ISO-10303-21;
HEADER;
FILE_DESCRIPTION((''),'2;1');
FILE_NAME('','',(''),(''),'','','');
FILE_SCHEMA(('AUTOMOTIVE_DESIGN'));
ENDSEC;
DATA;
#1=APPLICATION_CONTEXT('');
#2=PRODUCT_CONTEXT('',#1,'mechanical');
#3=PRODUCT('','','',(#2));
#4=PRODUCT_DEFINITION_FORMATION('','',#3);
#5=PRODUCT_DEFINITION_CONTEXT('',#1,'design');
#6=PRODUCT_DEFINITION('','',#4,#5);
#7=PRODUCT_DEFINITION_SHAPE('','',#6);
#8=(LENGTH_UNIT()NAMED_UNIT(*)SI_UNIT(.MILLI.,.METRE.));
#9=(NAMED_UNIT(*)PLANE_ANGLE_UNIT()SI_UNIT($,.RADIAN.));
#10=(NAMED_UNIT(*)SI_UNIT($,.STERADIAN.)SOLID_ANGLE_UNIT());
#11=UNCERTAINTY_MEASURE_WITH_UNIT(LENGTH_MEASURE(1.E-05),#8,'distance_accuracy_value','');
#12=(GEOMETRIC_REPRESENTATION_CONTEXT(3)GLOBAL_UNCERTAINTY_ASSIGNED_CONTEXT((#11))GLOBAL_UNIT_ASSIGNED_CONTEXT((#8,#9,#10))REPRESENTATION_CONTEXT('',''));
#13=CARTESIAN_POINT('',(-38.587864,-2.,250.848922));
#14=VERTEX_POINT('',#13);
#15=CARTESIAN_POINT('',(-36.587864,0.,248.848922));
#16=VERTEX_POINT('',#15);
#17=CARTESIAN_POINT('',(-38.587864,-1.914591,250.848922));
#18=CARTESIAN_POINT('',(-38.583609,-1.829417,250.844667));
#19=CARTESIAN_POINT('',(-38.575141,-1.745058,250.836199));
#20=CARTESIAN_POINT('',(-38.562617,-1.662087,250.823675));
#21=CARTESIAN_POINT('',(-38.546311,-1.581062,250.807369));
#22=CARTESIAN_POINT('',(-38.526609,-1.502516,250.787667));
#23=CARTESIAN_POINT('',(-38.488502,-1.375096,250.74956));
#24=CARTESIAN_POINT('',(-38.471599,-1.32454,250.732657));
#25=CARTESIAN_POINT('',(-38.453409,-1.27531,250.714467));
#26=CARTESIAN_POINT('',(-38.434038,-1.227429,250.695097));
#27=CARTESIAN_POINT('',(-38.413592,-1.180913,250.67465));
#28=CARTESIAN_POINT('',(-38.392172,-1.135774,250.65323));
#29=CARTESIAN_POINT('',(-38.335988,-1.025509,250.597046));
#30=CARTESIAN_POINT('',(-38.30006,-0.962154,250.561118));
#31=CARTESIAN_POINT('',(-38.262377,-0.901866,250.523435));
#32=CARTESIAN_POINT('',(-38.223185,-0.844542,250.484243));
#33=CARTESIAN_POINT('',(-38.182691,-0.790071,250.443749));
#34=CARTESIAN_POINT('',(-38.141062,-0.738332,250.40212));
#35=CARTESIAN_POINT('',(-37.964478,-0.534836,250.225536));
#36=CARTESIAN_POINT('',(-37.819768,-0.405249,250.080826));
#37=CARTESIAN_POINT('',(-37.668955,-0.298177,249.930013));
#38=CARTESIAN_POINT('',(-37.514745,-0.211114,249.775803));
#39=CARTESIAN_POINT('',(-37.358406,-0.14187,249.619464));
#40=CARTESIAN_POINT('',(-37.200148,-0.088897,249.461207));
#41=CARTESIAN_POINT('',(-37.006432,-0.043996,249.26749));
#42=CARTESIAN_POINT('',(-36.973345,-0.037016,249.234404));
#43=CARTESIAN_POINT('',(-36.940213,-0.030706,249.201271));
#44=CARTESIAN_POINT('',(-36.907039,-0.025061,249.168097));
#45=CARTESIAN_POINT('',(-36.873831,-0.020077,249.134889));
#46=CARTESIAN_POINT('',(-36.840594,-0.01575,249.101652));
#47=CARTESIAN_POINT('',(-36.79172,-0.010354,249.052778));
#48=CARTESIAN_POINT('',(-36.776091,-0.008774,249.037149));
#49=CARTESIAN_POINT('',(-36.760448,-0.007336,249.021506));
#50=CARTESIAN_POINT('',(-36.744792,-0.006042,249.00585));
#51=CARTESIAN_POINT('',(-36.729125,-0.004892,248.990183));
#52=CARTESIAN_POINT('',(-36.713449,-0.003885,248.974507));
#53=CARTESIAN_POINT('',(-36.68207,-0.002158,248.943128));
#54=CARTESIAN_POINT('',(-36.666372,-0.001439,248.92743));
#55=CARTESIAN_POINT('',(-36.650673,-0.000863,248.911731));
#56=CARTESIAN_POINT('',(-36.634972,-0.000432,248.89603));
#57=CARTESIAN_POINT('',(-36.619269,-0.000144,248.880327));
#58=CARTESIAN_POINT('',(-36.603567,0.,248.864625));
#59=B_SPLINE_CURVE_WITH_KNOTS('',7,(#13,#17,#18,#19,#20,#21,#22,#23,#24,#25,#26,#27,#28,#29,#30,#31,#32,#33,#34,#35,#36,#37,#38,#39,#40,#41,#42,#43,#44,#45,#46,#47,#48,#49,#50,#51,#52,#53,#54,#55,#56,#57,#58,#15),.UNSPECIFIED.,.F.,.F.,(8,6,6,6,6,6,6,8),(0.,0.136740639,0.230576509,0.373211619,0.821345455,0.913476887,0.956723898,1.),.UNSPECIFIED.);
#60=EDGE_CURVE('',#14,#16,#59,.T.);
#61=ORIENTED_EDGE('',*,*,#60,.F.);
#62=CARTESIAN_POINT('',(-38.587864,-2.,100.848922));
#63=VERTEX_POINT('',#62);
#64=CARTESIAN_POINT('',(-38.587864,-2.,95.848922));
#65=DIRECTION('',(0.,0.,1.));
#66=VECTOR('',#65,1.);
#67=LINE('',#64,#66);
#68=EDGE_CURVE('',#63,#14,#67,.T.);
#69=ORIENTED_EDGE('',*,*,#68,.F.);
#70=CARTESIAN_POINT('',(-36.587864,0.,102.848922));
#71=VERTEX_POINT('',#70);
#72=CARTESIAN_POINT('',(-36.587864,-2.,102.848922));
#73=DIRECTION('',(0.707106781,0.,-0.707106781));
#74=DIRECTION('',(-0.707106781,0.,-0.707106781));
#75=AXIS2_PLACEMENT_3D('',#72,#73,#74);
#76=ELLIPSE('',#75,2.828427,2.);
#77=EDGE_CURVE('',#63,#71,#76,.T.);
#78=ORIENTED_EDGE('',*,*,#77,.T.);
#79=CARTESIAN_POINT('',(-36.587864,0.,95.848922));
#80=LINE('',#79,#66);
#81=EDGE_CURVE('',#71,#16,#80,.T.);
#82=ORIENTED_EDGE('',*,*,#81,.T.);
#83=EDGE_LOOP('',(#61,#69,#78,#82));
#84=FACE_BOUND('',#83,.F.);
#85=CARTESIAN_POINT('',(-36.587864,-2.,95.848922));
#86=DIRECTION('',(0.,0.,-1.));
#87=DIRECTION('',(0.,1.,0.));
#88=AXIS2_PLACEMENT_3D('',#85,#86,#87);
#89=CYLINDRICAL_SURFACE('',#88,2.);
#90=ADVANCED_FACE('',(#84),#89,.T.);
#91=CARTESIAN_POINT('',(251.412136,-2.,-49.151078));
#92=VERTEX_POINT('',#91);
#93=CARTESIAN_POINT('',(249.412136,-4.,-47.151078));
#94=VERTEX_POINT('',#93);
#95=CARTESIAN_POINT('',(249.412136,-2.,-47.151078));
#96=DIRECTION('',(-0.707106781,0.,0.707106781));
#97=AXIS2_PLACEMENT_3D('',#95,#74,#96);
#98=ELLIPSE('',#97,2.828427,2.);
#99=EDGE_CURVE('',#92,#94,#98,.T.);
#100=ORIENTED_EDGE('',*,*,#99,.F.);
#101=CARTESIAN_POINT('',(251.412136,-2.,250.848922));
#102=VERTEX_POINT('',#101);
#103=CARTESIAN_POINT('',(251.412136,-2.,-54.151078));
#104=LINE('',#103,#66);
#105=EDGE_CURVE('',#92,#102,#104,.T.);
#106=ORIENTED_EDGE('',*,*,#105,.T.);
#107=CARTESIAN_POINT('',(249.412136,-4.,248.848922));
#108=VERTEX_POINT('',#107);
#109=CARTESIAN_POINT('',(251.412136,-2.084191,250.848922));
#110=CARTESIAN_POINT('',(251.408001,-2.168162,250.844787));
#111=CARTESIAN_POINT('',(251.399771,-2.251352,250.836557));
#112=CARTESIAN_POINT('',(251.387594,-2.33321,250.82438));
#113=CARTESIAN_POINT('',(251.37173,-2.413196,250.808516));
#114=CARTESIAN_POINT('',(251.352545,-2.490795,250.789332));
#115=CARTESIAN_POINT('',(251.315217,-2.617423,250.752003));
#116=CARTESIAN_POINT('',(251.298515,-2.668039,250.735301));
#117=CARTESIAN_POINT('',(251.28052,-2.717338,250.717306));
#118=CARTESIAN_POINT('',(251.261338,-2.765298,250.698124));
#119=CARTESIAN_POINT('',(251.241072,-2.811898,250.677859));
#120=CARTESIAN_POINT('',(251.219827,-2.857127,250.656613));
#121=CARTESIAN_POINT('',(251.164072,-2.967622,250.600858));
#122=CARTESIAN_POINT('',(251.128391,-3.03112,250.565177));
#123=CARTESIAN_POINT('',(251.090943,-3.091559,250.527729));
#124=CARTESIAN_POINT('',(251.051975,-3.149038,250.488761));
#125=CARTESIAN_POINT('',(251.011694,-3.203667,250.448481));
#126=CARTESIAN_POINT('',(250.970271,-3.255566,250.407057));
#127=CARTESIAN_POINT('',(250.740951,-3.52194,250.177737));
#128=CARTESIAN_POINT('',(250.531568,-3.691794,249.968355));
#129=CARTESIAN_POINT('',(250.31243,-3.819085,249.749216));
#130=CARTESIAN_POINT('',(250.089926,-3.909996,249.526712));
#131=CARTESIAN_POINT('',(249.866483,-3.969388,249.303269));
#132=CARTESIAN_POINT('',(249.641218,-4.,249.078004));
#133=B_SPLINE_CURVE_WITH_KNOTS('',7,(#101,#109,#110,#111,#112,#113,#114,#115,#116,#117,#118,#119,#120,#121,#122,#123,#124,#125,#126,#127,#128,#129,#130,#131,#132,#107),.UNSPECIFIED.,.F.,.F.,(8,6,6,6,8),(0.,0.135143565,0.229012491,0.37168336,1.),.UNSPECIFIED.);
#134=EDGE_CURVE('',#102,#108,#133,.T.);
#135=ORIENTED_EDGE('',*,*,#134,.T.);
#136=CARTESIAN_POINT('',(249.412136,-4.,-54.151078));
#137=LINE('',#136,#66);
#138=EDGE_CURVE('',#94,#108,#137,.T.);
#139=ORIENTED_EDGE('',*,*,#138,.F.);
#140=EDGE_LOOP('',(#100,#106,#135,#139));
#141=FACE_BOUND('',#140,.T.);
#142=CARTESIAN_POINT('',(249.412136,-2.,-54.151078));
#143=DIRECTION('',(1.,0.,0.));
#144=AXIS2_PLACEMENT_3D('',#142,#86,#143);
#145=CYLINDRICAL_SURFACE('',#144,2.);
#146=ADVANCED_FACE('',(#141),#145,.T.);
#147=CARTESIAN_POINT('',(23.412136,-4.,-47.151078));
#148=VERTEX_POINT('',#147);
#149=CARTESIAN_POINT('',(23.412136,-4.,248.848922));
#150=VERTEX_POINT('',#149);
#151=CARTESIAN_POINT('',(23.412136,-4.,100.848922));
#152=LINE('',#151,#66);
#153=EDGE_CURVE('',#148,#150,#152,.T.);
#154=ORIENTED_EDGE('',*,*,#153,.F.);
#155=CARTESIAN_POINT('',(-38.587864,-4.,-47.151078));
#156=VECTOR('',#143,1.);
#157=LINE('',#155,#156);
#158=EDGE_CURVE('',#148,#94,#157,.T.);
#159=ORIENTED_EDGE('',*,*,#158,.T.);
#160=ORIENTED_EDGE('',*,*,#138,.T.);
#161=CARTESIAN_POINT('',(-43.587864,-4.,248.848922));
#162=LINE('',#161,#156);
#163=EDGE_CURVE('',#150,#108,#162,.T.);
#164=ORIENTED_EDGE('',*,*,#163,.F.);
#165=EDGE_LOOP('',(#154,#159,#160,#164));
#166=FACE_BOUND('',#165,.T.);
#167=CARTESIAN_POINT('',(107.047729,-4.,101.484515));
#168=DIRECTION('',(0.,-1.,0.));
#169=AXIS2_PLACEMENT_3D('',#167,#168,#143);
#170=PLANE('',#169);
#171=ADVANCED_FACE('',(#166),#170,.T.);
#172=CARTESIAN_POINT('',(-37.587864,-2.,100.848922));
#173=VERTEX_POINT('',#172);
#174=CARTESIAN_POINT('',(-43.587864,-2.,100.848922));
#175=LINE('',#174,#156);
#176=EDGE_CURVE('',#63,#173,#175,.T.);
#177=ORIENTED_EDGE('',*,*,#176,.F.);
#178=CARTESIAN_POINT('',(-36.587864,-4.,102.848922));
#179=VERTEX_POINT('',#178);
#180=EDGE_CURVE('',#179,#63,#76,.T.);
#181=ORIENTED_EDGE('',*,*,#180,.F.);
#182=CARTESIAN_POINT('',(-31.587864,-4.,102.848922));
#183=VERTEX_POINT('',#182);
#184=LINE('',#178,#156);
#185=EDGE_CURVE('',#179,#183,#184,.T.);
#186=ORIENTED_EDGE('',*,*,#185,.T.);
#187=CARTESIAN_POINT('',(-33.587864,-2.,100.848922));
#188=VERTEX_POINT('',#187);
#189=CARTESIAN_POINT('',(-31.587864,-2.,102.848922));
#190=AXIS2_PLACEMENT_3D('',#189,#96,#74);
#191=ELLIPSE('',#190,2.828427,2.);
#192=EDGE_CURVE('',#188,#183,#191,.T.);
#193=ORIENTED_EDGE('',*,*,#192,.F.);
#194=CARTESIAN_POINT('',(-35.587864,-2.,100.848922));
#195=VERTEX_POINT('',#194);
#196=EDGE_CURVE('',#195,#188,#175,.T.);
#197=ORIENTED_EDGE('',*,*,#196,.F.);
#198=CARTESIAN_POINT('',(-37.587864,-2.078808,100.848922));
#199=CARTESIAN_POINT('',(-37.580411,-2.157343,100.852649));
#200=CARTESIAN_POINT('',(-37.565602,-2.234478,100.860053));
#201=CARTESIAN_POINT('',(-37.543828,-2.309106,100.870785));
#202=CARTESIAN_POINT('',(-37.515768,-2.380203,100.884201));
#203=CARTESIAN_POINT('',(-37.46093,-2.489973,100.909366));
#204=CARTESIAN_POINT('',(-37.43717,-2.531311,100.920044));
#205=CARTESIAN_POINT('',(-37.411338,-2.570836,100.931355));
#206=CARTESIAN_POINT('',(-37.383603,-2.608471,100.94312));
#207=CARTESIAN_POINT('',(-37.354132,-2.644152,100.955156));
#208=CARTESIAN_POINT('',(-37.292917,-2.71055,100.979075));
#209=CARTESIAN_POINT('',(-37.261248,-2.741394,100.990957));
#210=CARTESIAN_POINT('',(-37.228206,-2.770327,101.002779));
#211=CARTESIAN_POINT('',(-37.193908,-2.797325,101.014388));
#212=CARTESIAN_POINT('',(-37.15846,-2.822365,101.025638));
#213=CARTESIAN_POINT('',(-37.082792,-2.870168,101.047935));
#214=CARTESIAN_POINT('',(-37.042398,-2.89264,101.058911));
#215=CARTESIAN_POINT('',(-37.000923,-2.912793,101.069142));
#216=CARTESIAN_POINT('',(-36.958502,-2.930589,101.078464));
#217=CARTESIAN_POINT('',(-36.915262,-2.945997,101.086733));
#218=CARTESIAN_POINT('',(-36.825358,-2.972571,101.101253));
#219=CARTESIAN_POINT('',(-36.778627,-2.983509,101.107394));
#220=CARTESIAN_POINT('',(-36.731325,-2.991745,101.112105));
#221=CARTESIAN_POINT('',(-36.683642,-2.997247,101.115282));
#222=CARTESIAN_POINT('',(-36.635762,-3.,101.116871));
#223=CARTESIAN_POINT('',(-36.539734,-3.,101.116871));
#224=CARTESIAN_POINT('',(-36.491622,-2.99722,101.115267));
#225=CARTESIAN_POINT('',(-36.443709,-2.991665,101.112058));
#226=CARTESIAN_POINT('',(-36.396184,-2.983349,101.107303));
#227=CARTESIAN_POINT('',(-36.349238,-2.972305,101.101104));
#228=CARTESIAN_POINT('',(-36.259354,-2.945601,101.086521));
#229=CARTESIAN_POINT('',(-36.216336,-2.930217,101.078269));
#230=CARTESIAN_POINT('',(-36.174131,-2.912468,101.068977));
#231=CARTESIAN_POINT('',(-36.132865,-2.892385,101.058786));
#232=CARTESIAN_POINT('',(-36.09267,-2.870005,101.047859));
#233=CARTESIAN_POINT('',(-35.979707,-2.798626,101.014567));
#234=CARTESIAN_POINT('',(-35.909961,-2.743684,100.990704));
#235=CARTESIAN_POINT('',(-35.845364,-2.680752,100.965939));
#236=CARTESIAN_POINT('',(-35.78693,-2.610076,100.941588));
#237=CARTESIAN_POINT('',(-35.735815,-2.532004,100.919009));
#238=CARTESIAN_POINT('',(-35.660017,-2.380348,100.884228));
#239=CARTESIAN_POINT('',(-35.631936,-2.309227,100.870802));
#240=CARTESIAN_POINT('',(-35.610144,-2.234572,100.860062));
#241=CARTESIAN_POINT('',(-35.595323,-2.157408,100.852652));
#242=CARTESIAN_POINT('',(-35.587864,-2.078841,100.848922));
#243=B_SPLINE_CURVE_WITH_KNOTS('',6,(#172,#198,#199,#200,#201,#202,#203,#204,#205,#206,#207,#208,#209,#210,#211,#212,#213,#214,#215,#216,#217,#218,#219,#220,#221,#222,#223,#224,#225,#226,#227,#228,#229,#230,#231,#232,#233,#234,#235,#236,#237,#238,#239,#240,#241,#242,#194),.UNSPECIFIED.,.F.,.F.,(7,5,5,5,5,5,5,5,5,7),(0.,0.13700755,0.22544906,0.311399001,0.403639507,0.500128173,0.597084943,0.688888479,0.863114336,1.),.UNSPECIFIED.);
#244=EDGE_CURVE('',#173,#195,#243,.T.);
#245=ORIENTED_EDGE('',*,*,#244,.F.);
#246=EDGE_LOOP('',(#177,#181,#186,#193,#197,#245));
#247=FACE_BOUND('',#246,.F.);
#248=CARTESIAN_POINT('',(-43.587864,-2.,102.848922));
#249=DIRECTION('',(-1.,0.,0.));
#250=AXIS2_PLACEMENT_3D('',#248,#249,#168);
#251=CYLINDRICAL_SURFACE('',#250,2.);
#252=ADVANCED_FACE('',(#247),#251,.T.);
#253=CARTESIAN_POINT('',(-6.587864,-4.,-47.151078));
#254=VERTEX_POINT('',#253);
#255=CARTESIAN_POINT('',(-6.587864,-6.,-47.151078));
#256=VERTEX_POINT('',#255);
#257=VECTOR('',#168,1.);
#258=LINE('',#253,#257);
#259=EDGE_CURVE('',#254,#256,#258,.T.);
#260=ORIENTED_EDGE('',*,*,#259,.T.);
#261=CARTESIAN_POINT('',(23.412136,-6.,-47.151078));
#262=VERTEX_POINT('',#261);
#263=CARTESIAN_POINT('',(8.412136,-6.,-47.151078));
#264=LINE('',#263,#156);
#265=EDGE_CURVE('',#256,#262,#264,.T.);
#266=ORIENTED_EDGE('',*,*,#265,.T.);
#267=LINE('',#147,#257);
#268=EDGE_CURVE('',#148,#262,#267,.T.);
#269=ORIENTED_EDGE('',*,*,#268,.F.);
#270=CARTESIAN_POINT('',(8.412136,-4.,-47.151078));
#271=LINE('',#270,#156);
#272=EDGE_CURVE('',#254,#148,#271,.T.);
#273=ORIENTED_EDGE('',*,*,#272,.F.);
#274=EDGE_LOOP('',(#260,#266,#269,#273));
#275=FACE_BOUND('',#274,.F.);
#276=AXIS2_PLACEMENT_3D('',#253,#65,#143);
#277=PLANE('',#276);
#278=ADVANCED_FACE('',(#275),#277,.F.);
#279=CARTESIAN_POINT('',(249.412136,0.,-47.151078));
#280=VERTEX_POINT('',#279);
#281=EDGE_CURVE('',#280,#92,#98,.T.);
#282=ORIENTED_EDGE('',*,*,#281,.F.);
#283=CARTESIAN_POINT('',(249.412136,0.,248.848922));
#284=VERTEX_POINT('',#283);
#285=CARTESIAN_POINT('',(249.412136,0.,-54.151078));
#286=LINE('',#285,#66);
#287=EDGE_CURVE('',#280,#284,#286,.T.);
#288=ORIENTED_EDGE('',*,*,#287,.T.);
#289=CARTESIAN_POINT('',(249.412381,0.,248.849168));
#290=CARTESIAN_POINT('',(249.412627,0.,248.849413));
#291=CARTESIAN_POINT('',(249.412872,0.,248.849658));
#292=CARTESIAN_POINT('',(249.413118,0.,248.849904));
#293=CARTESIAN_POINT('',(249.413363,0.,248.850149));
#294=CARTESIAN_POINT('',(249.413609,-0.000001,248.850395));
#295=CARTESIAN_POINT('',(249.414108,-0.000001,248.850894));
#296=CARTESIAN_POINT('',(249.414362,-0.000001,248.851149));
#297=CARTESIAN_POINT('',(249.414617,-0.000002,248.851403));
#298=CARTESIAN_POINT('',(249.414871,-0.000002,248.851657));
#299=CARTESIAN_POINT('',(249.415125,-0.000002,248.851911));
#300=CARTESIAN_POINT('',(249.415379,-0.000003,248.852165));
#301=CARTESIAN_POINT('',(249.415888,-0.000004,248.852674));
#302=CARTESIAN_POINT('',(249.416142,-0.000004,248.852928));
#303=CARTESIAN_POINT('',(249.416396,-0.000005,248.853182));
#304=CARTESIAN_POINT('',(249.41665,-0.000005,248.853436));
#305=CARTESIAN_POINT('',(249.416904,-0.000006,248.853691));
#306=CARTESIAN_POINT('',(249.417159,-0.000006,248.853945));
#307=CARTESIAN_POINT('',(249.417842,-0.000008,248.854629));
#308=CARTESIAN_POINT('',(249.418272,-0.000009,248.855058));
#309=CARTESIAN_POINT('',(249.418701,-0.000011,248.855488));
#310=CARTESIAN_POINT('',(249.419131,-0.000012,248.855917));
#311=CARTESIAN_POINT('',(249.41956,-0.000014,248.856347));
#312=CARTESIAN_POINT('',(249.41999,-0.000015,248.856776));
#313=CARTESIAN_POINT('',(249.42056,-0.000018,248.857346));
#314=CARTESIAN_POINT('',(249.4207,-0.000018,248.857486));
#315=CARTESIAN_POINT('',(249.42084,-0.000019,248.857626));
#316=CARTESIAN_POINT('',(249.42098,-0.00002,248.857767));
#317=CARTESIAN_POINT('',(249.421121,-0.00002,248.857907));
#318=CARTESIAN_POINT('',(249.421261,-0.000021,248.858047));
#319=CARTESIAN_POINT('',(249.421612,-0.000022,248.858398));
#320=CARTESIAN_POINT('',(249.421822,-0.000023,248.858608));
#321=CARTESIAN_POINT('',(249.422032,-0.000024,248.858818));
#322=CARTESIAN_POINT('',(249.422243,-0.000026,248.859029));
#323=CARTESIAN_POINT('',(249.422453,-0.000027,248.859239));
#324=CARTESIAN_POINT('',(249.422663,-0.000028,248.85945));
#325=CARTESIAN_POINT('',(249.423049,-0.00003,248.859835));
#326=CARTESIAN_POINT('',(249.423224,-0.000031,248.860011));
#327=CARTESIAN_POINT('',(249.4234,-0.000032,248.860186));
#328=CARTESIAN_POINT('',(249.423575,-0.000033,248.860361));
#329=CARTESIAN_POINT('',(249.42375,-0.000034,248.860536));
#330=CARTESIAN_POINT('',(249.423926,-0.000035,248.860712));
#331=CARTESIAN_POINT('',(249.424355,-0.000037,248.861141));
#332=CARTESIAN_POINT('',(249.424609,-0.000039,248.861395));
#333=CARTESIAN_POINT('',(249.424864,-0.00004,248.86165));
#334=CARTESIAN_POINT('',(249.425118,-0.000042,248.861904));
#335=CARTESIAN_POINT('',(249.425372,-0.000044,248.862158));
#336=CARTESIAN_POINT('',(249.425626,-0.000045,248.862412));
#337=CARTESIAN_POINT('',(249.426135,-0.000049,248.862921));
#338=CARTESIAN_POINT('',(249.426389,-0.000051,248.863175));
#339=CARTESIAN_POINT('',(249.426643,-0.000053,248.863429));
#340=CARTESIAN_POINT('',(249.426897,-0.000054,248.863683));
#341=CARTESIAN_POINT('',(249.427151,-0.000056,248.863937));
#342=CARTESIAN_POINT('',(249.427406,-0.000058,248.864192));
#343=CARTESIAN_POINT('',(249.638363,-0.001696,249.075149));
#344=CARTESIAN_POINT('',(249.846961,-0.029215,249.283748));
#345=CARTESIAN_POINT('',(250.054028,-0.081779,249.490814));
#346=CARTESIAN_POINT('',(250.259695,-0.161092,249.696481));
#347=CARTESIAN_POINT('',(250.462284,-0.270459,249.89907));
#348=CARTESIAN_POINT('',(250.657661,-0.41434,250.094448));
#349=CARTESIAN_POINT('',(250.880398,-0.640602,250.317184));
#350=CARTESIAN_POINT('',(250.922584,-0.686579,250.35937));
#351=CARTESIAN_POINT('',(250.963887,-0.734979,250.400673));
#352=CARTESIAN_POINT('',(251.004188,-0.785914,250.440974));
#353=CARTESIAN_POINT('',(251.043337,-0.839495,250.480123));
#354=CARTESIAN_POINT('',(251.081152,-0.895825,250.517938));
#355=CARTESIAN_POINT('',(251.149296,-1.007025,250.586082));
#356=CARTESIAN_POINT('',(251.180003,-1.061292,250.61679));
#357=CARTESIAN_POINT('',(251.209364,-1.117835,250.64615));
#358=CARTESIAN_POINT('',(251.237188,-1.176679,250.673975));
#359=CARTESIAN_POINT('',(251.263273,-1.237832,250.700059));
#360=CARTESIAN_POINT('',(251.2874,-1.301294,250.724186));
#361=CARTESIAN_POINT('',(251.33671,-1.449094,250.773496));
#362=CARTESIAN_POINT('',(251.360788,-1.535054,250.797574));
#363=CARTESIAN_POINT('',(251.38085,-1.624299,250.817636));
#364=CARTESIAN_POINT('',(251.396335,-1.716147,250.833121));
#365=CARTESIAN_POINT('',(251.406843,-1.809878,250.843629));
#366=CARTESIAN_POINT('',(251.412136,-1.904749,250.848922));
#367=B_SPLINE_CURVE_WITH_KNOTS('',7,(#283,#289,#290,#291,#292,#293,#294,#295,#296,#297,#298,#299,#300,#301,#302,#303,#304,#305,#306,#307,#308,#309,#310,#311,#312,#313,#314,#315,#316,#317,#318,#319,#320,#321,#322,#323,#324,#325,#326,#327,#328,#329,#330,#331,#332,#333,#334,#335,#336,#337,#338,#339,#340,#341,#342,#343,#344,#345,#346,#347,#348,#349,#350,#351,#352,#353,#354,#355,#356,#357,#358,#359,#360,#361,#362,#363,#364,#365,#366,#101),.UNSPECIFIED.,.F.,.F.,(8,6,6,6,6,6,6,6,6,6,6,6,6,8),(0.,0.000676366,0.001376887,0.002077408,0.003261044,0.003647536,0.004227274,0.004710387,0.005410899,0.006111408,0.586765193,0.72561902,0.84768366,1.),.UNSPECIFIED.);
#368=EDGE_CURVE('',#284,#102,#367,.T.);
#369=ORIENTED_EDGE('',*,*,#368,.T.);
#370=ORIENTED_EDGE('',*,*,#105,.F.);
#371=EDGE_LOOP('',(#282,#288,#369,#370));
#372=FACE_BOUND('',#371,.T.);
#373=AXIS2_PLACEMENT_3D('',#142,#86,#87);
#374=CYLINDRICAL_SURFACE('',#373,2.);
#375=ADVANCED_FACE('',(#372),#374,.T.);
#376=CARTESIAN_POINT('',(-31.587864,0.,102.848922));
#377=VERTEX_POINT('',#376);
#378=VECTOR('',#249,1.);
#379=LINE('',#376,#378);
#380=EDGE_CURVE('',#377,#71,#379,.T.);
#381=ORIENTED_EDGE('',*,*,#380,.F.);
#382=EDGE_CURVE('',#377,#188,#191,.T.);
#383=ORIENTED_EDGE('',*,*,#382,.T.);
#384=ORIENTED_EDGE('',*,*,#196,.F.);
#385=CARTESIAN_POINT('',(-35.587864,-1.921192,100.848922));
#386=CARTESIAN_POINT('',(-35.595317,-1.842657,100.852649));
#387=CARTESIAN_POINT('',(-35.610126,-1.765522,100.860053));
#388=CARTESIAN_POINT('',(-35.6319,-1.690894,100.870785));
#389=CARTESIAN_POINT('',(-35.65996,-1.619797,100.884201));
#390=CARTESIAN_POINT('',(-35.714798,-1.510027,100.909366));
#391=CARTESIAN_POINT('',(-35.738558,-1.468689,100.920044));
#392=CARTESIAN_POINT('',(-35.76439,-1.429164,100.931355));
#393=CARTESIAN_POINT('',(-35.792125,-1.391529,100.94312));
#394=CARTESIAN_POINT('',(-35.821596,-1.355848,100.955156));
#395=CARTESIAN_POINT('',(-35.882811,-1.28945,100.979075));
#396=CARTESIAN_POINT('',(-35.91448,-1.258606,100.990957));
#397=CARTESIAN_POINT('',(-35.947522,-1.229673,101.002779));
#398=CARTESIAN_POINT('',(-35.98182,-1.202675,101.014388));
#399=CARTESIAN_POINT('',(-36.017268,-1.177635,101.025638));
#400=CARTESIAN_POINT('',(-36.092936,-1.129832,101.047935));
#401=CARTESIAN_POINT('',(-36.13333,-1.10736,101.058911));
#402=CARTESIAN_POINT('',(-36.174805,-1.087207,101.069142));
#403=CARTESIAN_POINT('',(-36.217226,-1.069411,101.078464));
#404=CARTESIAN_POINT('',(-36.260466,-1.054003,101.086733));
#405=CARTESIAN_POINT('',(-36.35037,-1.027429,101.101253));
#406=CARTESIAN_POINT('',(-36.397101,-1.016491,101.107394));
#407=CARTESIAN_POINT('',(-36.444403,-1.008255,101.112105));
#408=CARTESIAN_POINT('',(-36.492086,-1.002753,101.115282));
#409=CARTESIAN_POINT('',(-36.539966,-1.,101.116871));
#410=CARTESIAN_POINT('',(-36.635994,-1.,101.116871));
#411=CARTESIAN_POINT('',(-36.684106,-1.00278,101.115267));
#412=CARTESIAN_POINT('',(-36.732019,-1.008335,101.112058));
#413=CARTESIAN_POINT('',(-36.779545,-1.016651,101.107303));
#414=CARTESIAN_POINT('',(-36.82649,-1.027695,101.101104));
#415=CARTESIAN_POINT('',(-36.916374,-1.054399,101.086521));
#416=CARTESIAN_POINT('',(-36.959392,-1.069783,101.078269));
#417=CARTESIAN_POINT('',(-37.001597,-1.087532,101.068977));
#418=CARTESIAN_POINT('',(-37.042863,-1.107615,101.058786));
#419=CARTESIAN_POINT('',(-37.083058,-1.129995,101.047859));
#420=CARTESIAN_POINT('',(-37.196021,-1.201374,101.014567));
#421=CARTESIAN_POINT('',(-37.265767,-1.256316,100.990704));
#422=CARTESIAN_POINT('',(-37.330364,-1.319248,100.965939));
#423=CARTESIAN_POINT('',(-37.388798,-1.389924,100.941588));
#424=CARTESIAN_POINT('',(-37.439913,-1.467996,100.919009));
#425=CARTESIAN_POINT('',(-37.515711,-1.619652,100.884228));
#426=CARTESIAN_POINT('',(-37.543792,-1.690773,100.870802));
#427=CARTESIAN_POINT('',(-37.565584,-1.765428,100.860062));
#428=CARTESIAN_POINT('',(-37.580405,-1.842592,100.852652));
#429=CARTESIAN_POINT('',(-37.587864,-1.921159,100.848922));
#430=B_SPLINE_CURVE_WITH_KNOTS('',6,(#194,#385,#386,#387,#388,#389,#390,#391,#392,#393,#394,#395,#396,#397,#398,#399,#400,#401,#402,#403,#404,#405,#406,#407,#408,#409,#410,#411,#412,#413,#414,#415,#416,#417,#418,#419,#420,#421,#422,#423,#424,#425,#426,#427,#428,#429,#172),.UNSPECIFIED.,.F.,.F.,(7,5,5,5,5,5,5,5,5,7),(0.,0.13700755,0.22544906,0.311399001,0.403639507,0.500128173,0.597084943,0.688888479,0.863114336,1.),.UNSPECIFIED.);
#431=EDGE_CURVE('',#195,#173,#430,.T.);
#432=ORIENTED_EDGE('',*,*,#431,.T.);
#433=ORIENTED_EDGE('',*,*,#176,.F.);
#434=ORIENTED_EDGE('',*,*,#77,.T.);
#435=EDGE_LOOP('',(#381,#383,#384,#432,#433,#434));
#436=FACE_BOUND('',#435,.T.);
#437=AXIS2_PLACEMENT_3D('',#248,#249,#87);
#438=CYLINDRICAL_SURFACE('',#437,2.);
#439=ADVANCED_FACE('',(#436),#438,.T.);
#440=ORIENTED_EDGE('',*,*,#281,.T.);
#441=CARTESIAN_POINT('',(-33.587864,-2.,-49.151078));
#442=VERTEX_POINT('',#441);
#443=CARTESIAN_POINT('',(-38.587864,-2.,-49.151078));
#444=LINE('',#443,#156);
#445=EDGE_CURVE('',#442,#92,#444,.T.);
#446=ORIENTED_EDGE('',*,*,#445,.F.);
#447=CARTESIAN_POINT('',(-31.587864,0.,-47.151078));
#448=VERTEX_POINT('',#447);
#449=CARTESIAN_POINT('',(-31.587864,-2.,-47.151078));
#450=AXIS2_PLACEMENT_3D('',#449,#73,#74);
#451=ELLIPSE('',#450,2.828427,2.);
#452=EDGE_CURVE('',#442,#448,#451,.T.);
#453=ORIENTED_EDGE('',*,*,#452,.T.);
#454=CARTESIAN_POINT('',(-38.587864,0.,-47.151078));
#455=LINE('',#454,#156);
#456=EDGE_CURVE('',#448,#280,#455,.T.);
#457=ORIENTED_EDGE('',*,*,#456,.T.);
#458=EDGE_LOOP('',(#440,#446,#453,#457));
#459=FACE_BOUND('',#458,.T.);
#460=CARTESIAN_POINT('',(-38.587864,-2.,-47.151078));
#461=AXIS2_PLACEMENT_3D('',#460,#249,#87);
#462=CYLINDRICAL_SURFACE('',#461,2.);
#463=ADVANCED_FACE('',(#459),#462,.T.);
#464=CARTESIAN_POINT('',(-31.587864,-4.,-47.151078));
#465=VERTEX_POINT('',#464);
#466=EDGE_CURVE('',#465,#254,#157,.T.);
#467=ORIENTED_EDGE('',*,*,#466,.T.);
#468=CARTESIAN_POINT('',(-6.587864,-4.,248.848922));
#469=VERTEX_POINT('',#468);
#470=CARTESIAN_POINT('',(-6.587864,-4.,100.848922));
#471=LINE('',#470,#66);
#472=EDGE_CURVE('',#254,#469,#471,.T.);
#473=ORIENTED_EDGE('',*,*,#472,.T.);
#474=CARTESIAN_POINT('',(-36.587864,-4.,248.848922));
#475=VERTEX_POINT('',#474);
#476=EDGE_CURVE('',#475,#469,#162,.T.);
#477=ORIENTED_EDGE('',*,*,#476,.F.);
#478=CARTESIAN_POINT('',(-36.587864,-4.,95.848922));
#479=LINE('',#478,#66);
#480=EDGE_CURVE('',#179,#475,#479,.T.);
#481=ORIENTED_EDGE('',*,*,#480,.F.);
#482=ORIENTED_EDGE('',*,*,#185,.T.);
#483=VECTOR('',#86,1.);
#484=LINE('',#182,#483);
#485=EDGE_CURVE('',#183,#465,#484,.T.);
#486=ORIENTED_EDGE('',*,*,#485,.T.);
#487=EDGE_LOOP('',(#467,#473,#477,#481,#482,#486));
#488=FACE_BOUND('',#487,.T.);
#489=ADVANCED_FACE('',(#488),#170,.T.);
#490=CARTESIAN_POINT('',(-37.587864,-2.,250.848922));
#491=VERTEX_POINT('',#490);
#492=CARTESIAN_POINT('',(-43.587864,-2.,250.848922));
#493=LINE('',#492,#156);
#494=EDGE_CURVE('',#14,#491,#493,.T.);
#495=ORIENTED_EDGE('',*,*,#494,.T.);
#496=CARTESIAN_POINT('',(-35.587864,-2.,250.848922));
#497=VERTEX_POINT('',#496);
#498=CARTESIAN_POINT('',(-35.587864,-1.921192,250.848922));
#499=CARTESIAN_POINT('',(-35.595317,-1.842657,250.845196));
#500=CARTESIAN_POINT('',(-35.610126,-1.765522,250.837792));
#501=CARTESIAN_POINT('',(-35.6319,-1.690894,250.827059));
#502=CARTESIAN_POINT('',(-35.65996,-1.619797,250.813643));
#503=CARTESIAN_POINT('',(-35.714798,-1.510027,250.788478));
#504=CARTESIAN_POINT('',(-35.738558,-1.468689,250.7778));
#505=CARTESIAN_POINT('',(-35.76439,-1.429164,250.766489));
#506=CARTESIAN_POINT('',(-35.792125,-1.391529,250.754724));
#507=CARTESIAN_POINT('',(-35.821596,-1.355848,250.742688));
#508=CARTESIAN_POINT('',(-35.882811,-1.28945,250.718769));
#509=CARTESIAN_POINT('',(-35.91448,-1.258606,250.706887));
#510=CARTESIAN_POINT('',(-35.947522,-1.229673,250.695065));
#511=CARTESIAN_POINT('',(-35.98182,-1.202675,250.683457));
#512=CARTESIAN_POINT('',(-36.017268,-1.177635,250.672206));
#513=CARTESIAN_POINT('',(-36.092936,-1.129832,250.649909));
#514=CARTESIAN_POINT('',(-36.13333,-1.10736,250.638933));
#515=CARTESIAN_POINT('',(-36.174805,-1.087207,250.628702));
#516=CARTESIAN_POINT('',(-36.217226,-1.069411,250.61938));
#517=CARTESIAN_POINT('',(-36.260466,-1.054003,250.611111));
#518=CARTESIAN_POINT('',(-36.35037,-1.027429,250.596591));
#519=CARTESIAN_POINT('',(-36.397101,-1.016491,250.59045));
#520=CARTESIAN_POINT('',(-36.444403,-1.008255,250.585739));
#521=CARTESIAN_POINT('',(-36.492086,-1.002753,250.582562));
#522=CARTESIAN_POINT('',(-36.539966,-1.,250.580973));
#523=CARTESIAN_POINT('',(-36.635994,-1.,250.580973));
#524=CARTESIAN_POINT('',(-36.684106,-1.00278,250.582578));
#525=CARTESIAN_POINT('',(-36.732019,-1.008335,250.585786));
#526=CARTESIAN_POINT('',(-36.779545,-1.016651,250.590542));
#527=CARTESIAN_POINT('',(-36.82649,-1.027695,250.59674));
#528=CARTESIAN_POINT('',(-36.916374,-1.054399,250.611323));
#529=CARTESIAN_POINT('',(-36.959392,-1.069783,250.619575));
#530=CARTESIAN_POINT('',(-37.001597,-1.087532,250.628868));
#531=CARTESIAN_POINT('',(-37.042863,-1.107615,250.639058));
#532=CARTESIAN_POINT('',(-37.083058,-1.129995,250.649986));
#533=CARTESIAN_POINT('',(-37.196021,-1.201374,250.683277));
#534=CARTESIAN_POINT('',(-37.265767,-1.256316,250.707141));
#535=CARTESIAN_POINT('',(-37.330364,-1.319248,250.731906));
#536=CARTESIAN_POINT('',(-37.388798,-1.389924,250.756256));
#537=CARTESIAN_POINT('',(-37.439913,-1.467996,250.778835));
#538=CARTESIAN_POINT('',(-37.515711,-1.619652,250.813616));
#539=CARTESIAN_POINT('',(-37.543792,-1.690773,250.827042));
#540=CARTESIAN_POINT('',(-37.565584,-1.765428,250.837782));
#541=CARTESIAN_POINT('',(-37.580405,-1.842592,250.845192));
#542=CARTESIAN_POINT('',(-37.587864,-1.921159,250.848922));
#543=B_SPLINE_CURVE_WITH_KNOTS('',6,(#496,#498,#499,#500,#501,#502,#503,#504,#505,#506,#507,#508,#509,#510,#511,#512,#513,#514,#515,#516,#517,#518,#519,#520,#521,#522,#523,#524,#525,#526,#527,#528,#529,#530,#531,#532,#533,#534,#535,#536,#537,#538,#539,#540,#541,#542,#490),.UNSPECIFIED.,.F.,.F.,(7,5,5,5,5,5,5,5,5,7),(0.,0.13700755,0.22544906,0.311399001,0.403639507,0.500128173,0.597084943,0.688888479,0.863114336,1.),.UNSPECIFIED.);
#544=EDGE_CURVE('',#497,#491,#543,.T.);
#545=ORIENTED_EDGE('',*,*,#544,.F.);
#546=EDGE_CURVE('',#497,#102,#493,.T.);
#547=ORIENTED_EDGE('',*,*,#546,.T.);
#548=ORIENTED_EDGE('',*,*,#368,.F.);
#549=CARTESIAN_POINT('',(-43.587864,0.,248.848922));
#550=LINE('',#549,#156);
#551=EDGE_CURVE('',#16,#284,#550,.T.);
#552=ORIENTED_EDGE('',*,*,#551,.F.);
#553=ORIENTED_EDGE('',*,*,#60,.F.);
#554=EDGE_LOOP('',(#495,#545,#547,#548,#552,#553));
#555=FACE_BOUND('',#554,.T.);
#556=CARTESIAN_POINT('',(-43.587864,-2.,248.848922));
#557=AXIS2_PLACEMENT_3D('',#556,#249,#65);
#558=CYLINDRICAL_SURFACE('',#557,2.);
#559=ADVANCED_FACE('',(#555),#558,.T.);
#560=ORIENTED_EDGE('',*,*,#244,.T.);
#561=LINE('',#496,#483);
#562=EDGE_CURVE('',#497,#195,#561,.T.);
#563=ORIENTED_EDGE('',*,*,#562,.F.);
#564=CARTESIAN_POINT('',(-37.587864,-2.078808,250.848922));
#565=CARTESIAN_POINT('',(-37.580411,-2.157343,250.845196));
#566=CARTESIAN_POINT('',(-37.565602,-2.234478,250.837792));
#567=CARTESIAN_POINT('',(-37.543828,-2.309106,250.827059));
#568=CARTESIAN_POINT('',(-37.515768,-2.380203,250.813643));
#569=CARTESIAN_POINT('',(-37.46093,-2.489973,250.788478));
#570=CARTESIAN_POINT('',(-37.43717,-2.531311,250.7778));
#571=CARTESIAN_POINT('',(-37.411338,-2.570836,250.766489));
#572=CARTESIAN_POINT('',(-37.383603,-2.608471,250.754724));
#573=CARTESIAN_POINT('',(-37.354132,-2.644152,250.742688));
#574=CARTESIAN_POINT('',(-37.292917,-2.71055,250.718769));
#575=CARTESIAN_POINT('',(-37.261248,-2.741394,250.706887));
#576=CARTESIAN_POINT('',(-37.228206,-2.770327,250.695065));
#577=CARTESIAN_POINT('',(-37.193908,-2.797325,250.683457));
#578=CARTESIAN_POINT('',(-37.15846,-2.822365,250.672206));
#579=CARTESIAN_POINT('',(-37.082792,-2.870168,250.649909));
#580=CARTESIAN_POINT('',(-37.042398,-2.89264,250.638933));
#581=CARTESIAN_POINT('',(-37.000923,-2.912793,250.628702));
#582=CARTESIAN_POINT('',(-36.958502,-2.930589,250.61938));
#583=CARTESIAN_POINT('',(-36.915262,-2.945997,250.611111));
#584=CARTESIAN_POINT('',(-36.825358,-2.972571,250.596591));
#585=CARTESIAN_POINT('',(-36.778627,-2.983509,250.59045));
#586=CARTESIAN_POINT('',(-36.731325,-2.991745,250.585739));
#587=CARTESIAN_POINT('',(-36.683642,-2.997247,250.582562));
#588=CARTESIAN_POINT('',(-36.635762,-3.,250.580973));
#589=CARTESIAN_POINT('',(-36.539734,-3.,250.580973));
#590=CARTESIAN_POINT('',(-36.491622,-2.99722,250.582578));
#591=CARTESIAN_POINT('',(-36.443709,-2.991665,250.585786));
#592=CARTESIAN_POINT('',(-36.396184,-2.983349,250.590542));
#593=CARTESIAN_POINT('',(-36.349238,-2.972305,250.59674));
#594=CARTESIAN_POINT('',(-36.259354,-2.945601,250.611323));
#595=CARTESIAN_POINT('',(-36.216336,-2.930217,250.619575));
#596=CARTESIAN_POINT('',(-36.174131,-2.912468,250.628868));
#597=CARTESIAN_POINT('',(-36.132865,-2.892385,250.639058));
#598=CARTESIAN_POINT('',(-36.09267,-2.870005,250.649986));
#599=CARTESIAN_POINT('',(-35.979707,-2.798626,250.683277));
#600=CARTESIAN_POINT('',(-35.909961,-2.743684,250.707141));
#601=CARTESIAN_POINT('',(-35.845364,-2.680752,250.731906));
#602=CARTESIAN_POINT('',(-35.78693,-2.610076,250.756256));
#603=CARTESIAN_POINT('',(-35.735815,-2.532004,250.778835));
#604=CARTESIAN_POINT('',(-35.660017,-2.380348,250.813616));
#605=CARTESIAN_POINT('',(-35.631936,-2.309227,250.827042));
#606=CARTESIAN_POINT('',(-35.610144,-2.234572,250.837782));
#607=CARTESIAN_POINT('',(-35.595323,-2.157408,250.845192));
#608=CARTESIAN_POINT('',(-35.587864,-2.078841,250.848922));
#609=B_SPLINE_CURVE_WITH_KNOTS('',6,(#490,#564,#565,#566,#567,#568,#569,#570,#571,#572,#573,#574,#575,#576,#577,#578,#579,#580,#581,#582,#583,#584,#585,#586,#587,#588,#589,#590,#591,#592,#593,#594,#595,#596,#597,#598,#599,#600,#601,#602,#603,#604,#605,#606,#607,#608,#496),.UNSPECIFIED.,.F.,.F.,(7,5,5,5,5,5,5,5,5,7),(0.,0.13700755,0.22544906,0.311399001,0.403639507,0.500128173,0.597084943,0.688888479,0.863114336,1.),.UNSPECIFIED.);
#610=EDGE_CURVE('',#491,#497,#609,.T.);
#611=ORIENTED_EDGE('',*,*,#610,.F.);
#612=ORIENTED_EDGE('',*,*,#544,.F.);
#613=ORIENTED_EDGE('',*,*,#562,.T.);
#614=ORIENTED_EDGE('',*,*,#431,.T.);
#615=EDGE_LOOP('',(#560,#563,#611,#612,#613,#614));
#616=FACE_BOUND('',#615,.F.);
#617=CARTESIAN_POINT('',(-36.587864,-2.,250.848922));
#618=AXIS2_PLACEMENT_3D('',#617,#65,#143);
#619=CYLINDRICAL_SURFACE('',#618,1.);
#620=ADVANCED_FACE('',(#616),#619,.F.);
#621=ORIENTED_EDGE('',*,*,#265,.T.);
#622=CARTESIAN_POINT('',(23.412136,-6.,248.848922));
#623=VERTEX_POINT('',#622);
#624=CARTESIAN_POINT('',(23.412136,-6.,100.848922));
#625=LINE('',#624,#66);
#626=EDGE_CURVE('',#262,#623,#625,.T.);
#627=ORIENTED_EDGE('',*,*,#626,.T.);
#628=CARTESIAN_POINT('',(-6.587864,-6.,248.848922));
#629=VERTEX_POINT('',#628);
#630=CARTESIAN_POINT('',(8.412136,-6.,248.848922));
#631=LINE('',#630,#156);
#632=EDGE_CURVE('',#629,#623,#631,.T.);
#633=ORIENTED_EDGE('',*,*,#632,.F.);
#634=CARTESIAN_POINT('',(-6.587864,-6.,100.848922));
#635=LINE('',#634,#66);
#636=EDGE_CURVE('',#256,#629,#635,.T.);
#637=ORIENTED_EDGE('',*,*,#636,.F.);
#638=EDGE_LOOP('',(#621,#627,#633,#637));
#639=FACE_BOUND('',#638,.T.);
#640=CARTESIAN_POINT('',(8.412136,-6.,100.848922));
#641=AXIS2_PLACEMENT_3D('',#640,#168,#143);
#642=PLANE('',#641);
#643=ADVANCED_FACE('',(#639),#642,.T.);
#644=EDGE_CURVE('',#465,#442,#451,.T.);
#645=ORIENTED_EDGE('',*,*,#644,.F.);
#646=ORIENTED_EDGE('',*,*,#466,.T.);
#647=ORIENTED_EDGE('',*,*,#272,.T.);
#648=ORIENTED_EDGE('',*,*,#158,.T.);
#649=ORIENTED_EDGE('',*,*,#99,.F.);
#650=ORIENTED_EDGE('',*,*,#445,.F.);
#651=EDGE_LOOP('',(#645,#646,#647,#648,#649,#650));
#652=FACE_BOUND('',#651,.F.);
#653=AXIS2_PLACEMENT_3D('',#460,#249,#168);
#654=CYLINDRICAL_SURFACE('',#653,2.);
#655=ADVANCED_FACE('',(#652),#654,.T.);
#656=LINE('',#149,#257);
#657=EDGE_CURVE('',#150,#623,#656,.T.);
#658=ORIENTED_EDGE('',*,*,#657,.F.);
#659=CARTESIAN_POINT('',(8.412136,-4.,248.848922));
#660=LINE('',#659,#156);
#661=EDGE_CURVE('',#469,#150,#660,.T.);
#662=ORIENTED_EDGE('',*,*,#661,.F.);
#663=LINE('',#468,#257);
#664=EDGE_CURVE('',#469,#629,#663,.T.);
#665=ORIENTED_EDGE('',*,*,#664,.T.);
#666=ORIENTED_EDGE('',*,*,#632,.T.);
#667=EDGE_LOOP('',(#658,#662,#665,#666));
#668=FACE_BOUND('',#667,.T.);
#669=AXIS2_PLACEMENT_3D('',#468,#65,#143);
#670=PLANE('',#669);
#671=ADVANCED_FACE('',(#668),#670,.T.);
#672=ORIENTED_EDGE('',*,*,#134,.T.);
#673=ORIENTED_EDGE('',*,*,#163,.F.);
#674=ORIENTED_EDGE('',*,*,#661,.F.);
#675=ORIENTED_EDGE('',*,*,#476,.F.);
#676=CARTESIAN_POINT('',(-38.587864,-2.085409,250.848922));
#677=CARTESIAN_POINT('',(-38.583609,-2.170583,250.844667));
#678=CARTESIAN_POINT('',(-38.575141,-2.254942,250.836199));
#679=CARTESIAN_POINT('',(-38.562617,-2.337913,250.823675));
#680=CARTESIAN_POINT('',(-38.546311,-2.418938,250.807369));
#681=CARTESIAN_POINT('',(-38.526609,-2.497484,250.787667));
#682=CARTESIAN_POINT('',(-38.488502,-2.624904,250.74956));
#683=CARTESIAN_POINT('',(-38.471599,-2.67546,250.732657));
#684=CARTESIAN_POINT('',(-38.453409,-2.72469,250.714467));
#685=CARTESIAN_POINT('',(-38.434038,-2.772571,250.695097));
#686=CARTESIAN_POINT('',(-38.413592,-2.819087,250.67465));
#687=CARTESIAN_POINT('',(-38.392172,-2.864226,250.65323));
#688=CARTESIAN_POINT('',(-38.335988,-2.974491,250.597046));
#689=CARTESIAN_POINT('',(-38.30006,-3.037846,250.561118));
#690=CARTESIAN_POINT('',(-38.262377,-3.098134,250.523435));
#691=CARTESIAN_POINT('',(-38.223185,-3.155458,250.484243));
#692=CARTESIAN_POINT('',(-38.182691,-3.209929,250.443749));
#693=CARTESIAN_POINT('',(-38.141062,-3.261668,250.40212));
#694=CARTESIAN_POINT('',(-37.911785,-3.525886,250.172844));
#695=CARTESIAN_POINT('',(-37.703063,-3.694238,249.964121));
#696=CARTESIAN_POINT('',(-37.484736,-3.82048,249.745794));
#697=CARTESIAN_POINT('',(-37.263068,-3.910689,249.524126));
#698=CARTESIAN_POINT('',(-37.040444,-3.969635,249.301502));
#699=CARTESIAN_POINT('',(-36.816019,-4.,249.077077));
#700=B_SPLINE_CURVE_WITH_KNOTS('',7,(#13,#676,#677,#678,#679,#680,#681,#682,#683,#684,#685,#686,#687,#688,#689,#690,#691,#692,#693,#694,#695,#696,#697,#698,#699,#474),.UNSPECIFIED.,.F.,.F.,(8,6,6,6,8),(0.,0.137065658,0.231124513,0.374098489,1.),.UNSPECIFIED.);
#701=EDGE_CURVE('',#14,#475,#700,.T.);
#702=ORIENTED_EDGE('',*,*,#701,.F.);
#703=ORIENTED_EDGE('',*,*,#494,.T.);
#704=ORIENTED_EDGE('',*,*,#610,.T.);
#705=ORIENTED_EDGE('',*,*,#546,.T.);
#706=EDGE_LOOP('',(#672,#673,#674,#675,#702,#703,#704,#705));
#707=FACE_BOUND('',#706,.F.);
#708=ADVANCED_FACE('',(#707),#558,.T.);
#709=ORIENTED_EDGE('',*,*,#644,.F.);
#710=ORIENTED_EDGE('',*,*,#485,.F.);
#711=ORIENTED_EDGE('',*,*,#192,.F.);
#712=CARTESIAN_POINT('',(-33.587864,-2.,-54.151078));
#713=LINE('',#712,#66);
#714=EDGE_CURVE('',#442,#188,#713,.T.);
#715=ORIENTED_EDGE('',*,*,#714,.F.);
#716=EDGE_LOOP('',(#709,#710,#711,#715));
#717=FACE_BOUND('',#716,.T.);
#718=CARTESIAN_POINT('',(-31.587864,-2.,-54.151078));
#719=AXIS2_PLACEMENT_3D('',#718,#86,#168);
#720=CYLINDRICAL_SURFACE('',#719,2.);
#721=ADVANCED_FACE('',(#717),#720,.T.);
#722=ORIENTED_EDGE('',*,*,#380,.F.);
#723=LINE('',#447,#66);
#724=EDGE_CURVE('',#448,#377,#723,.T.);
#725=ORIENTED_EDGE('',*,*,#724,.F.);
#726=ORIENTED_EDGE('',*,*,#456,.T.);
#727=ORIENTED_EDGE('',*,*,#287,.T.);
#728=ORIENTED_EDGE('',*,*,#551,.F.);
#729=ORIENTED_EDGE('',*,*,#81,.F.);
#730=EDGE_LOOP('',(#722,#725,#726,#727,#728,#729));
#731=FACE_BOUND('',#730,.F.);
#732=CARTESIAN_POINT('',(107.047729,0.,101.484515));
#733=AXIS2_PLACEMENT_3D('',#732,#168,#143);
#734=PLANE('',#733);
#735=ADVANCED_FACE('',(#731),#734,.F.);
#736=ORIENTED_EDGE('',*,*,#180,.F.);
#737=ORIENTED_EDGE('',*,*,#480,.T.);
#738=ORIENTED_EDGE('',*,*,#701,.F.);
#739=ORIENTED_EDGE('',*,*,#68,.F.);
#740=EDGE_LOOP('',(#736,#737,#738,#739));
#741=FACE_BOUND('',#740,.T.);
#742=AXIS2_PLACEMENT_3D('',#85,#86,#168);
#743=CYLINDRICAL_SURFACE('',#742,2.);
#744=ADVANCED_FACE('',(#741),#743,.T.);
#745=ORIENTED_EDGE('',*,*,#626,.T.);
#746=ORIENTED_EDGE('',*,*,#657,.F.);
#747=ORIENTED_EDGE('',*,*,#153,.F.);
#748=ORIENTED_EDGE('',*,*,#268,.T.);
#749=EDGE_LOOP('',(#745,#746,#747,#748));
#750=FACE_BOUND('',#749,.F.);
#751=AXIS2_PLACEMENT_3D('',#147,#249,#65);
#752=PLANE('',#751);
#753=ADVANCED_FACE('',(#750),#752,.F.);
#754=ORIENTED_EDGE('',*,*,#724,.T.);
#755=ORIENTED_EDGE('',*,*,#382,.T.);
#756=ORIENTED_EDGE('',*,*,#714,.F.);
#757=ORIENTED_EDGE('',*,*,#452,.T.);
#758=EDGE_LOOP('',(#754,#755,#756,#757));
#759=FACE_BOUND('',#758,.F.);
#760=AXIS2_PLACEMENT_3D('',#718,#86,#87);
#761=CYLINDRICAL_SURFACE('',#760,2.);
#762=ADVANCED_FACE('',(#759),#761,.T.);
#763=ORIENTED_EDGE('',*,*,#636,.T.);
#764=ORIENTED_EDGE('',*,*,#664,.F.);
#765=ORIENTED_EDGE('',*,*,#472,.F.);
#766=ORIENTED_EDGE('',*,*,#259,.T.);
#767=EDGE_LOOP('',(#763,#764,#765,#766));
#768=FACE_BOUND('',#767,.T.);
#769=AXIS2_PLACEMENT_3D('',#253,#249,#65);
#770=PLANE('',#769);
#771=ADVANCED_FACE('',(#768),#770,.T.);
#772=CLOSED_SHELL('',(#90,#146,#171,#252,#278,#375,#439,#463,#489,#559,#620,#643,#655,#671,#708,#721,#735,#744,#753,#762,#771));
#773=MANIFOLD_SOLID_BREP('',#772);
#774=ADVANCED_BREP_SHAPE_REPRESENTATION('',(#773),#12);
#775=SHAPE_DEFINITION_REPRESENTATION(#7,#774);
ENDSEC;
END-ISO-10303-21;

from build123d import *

# Parameters (mm, degrees)
F1_DEPTH     = 4
F2_R         = 1
F3_DEPTH     = 310
F4_T1_DEPTH  = 300
F4_T3_DEPTH  = 160
F4_T5_DEPTH  = 10
F4_T7_DEPTH  = 155
F4_T9_DEPTH  = 295
F4_T11_DEPTH = 310
F4_T17_DEPTH = 15
F4_T21_DEPTH = 160
F5_T1_DEPTH  = 300
F5_T3_DEPTH  = 160
F5_T5_DEPTH  = 10
F5_T7_DEPTH  = 155
F5_T9_DEPTH  = 295
F5_T11_DEPTH = 310
F5_T17_DEPTH = 15
F5_T21_DEPTH = 160
F6_W         = 30
F6_H         = 296
F7_DEPTH     = 2


# Not quite as in the source:
# - a fillet or chamfer that OpenCascade refuses, or shapes differently, is made with other operations: its cross-section is extruded or revolved along the edge and cut away or added


with BuildPart() as f1:
    # F0 (on Front) → F1 (new body)
    with BuildSketch(Plane.XZ):
        Polygon((251.4121359825, 250.8489221025), (-38.5878640175, 250.8489221025), (-38.5878640175, 100.8489221025), (-33.5878640175, 100.8489221025), (-33.5878640175, -49.1510778975), (251.4121359825, -49.1510778975), align=None)
    extrude(amount=F1_DEPTH)

    # F2 (on face) → F3 (cut)
    with BuildSketch(Plane.XY.offset(250.8489221025)):
        with Locations((-36.5878640175, -2)):
            Circle(F2_R)
    extrude(amount=-F3_DEPTH, mode=Mode.SUBTRACT)

    # F4: fillet of radius 2 on 6 edges, made by hand

    # F4_s2 → F4_t1 (cut)
    with BuildSketch(Plane.YZ.offset(-43.5878640175)):
        with BuildLine():
            ThreePointArc((-2, 250.8489221025), (-3.4142135624, 250.2631356648), (-4, 248.8489221025))
            Line((-4, 248.8489221025), (-4, 250.8489221025))
            Line((-4, 250.8489221025), (-2, 250.8489221025))
        make_face()
    extrude(amount=F4_T1_DEPTH, mode=Mode.SUBTRACT)

    # F4_s4 → F4_t3 (cut)
    with BuildSketch(Plane.XY.offset(95.8489221025)):
        with BuildLine():
            ThreePointArc((-36.5878640175, -4), (-38.0020775799, -3.4142135624), (-38.5878640175, -2))
            Line((-38.5878640175, -2), (-38.5878640175, -4))
            Line((-38.5878640175, -4), (-36.5878640175, -4))
        make_face()
    extrude(amount=F4_T3_DEPTH, mode=Mode.SUBTRACT)

    # F4_s6 → F4_t5 (cut)
    with BuildSketch(Plane.YZ.offset(-43.5878640175)):
        with BuildLine():
            ThreePointArc((-4, 102.8489221025), (-3.4142135624, 101.4347085401), (-2, 100.8489221025))
            Line((-2, 100.8489221025), (-4, 100.8489221025))
            Line((-4, 100.8489221025), (-4, 102.8489221025))
        make_face()
    extrude(amount=F4_T5_DEPTH, mode=Mode.SUBTRACT)

    # F4_s8 → F4_t7 (cut)
    with BuildSketch(Plane.XY.offset(-54.1510778975)):
        with BuildLine():
            ThreePointArc((-31.5878640175, -4), (-33.0020775799, -3.4142135624), (-33.5878640175, -2))
            Line((-33.5878640175, -2), (-33.5878640175, -4))
            Line((-33.5878640175, -4), (-31.5878640175, -4))
        make_face()
    extrude(amount=F4_T7_DEPTH, mode=Mode.SUBTRACT)

    # F4_s10 → F4_t9 (cut)
    with BuildSketch(Plane.YZ.offset(-38.5878640175)):
        with BuildLine():
            ThreePointArc((-4, -47.1510778975), (-3.4142135624, -48.5652914599), (-2, -49.1510778975))
            Line((-2, -49.1510778975), (-4, -49.1510778975))
            Line((-4, -49.1510778975), (-4, -47.1510778975))
        make_face()
    extrude(amount=F4_T9_DEPTH, mode=Mode.SUBTRACT)

    # F4_s12 → F4_t11 (cut)
    with BuildSketch(Plane.XY.offset(-54.1510778975)):
        with BuildLine():
            ThreePointArc((251.4121359825, -2), (250.8263495449, -3.4142135624), (249.4121359825, -4))
            Line((249.4121359825, -4), (251.4121359825, -4))
            Line((251.4121359825, -4), (251.4121359825, -2))
        make_face()
    extrude(amount=F4_T11_DEPTH, mode=Mode.SUBTRACT)


with BuildPart() as f4_tool15:
    # F4_s16 → F4_t17 (new body)
    with BuildSketch(Plane.YZ.offset(-43.5878640175)):
        with BuildLine():
            ThreePointArc((-4, 102.8489221025), (-3.4142135624, 101.4347085401), (-2, 100.8489221025))
            Line((-2, 100.8489221025), (-4, 100.8489221025))
            Line((-4, 100.8489221025), (-4, 102.8489221025))
        make_face()
    extrude(amount=F4_T17_DEPTH)

    split(bisect_by=Plane.YZ.offset(-33.5878640175), keep=Keep.TOP)


with BuildPart() as f4_tool19:
    # F4_s20 → F4_t21 (new body)
    with BuildSketch(Plane.XY.offset(105.8489221025)):
        with BuildLine():
            ThreePointArc((-31.5878640175, -4), (-33.0020775799, -3.4142135624), (-33.5878640175, -2))
            Line((-33.5878640175, -2), (-33.5878640175, -4))
            Line((-33.5878640175, -4), (-31.5878640175, -4))
        make_face()
    extrude(amount=-F4_T21_DEPTH)

    split(bisect_by=Plane.XY.offset(100.8489221025), keep=Keep.TOP)


with BuildPart() as f4_tool15_1:
    add(f4_tool15.part)

    # F4_t23: intersect F4_tool19
    add(f4_tool19.part, mode=Mode.INTERSECT)


with BuildPart() as f1_1:
    add(f1.part)

    # F4_t13: cut F4_tool15
    add(f4_tool15_1.part, mode=Mode.SUBTRACT)

    # F5: fillet of radius 2 on 6 edges, made by hand

    # F5_s2 → F5_t1 (cut)
    with BuildSketch(Plane.YZ.offset(-43.5878640175)):
        with BuildLine():
            ThreePointArc((-2, 250.8489221025), (-0.5857864376, 250.2631356648), (0, 248.8489221025))
            Line((0, 248.8489221025), (0, 250.8489221025))
            Line((0, 250.8489221025), (-2, 250.8489221025))
        make_face()
    extrude(amount=F5_T1_DEPTH, mode=Mode.SUBTRACT)

    # F5_s4 → F5_t3 (cut)
    with BuildSketch(Plane.XY.offset(95.8489221025)):
        with BuildLine():
            ThreePointArc((-36.5878640175, 0), (-38.0020775799, -0.5857864376), (-38.5878640175, -2))
            Line((-38.5878640175, -2), (-38.5878640175, 0))
            Line((-38.5878640175, 0), (-36.5878640175, 0))
        make_face()
    extrude(amount=F5_T3_DEPTH, mode=Mode.SUBTRACT)

    # F5_s6 → F5_t5 (cut)
    with BuildSketch(Plane.YZ.offset(-43.5878640175)):
        with BuildLine():
            ThreePointArc((0, 102.8489221025), (-0.5857864376, 101.4347085401), (-2, 100.8489221025))
            Line((-2, 100.8489221025), (0, 100.8489221025))
            Line((0, 100.8489221025), (0, 102.8489221025))
        make_face()
    extrude(amount=F5_T5_DEPTH, mode=Mode.SUBTRACT)

    # F5_s8 → F5_t7 (cut)
    with BuildSketch(Plane.XY.offset(-54.1510778975)):
        with BuildLine():
            ThreePointArc((-31.5878640175, 0), (-33.0020775799, -0.5857864376), (-33.5878640175, -2))
            Line((-33.5878640175, -2), (-33.5878640175, 0))
            Line((-33.5878640175, 0), (-31.5878640175, 0))
        make_face()
    extrude(amount=F5_T7_DEPTH, mode=Mode.SUBTRACT)

    # F5_s10 → F5_t9 (cut)
    with BuildSketch(Plane.YZ.offset(-38.5878640175)):
        with BuildLine():
            ThreePointArc((0, -47.1510778975), (-0.5857864376, -48.5652914599), (-2, -49.1510778975))
            Line((-2, -49.1510778975), (0, -49.1510778975))
            Line((0, -49.1510778975), (0, -47.1510778975))
        make_face()
    extrude(amount=F5_T9_DEPTH, mode=Mode.SUBTRACT)

    # F5_s12 → F5_t11 (cut)
    with BuildSketch(Plane.XY.offset(-54.1510778975)):
        with BuildLine():
            ThreePointArc((249.4121359825, 0), (250.8263495449, -0.5857864376), (251.4121359825, -2))
            Line((251.4121359825, -2), (251.4121359825, 0))
            Line((251.4121359825, 0), (249.4121359825, 0))
        make_face()
    extrude(amount=F5_T11_DEPTH, mode=Mode.SUBTRACT)


with BuildPart() as f5_tool15:
    # F5_s16 → F5_t17 (new body)
    with BuildSketch(Plane.YZ.offset(-43.5878640175)):
        with BuildLine():
            ThreePointArc((0, 102.8489221025), (-0.5857864376, 101.4347085401), (-2, 100.8489221025))
            Line((-2, 100.8489221025), (0, 100.8489221025))
            Line((0, 100.8489221025), (0, 102.8489221025))
        make_face()
    extrude(amount=F5_T17_DEPTH)

    split(bisect_by=Plane.YZ.offset(-33.5878640175), keep=Keep.TOP)


with BuildPart() as f5_tool19:
    # F5_s20 → F5_t21 (new body)
    with BuildSketch(Plane.XY.offset(105.8489221025)):
        with BuildLine():
            ThreePointArc((-31.5878640175, 0), (-33.0020775799, -0.5857864376), (-33.5878640175, -2))
            Line((-33.5878640175, -2), (-33.5878640175, 0))
            Line((-33.5878640175, 0), (-31.5878640175, 0))
        make_face()
    extrude(amount=-F5_T21_DEPTH)

    split(bisect_by=Plane.XY.offset(100.8489221025), keep=Keep.TOP)


with BuildPart() as f5_tool15_1:
    add(f5_tool15.part)

    # F5_t23: intersect F5_tool19
    add(f5_tool19.part, mode=Mode.INTERSECT)


with BuildPart() as f1_2:
    add(f1_1.part)

    # F5_t13: cut F5_tool15
    add(f5_tool15_1.part, mode=Mode.SUBTRACT)

    # F6 (on face) → F7 (join)
    with BuildSketch(Plane.XZ.offset(4)):
        with Locations((8.4121359825, 100.8489221025)):
            Rectangle(F6_W, F6_H)
    extrude(amount=F7_DEPTH)


solid = f1_2.part
